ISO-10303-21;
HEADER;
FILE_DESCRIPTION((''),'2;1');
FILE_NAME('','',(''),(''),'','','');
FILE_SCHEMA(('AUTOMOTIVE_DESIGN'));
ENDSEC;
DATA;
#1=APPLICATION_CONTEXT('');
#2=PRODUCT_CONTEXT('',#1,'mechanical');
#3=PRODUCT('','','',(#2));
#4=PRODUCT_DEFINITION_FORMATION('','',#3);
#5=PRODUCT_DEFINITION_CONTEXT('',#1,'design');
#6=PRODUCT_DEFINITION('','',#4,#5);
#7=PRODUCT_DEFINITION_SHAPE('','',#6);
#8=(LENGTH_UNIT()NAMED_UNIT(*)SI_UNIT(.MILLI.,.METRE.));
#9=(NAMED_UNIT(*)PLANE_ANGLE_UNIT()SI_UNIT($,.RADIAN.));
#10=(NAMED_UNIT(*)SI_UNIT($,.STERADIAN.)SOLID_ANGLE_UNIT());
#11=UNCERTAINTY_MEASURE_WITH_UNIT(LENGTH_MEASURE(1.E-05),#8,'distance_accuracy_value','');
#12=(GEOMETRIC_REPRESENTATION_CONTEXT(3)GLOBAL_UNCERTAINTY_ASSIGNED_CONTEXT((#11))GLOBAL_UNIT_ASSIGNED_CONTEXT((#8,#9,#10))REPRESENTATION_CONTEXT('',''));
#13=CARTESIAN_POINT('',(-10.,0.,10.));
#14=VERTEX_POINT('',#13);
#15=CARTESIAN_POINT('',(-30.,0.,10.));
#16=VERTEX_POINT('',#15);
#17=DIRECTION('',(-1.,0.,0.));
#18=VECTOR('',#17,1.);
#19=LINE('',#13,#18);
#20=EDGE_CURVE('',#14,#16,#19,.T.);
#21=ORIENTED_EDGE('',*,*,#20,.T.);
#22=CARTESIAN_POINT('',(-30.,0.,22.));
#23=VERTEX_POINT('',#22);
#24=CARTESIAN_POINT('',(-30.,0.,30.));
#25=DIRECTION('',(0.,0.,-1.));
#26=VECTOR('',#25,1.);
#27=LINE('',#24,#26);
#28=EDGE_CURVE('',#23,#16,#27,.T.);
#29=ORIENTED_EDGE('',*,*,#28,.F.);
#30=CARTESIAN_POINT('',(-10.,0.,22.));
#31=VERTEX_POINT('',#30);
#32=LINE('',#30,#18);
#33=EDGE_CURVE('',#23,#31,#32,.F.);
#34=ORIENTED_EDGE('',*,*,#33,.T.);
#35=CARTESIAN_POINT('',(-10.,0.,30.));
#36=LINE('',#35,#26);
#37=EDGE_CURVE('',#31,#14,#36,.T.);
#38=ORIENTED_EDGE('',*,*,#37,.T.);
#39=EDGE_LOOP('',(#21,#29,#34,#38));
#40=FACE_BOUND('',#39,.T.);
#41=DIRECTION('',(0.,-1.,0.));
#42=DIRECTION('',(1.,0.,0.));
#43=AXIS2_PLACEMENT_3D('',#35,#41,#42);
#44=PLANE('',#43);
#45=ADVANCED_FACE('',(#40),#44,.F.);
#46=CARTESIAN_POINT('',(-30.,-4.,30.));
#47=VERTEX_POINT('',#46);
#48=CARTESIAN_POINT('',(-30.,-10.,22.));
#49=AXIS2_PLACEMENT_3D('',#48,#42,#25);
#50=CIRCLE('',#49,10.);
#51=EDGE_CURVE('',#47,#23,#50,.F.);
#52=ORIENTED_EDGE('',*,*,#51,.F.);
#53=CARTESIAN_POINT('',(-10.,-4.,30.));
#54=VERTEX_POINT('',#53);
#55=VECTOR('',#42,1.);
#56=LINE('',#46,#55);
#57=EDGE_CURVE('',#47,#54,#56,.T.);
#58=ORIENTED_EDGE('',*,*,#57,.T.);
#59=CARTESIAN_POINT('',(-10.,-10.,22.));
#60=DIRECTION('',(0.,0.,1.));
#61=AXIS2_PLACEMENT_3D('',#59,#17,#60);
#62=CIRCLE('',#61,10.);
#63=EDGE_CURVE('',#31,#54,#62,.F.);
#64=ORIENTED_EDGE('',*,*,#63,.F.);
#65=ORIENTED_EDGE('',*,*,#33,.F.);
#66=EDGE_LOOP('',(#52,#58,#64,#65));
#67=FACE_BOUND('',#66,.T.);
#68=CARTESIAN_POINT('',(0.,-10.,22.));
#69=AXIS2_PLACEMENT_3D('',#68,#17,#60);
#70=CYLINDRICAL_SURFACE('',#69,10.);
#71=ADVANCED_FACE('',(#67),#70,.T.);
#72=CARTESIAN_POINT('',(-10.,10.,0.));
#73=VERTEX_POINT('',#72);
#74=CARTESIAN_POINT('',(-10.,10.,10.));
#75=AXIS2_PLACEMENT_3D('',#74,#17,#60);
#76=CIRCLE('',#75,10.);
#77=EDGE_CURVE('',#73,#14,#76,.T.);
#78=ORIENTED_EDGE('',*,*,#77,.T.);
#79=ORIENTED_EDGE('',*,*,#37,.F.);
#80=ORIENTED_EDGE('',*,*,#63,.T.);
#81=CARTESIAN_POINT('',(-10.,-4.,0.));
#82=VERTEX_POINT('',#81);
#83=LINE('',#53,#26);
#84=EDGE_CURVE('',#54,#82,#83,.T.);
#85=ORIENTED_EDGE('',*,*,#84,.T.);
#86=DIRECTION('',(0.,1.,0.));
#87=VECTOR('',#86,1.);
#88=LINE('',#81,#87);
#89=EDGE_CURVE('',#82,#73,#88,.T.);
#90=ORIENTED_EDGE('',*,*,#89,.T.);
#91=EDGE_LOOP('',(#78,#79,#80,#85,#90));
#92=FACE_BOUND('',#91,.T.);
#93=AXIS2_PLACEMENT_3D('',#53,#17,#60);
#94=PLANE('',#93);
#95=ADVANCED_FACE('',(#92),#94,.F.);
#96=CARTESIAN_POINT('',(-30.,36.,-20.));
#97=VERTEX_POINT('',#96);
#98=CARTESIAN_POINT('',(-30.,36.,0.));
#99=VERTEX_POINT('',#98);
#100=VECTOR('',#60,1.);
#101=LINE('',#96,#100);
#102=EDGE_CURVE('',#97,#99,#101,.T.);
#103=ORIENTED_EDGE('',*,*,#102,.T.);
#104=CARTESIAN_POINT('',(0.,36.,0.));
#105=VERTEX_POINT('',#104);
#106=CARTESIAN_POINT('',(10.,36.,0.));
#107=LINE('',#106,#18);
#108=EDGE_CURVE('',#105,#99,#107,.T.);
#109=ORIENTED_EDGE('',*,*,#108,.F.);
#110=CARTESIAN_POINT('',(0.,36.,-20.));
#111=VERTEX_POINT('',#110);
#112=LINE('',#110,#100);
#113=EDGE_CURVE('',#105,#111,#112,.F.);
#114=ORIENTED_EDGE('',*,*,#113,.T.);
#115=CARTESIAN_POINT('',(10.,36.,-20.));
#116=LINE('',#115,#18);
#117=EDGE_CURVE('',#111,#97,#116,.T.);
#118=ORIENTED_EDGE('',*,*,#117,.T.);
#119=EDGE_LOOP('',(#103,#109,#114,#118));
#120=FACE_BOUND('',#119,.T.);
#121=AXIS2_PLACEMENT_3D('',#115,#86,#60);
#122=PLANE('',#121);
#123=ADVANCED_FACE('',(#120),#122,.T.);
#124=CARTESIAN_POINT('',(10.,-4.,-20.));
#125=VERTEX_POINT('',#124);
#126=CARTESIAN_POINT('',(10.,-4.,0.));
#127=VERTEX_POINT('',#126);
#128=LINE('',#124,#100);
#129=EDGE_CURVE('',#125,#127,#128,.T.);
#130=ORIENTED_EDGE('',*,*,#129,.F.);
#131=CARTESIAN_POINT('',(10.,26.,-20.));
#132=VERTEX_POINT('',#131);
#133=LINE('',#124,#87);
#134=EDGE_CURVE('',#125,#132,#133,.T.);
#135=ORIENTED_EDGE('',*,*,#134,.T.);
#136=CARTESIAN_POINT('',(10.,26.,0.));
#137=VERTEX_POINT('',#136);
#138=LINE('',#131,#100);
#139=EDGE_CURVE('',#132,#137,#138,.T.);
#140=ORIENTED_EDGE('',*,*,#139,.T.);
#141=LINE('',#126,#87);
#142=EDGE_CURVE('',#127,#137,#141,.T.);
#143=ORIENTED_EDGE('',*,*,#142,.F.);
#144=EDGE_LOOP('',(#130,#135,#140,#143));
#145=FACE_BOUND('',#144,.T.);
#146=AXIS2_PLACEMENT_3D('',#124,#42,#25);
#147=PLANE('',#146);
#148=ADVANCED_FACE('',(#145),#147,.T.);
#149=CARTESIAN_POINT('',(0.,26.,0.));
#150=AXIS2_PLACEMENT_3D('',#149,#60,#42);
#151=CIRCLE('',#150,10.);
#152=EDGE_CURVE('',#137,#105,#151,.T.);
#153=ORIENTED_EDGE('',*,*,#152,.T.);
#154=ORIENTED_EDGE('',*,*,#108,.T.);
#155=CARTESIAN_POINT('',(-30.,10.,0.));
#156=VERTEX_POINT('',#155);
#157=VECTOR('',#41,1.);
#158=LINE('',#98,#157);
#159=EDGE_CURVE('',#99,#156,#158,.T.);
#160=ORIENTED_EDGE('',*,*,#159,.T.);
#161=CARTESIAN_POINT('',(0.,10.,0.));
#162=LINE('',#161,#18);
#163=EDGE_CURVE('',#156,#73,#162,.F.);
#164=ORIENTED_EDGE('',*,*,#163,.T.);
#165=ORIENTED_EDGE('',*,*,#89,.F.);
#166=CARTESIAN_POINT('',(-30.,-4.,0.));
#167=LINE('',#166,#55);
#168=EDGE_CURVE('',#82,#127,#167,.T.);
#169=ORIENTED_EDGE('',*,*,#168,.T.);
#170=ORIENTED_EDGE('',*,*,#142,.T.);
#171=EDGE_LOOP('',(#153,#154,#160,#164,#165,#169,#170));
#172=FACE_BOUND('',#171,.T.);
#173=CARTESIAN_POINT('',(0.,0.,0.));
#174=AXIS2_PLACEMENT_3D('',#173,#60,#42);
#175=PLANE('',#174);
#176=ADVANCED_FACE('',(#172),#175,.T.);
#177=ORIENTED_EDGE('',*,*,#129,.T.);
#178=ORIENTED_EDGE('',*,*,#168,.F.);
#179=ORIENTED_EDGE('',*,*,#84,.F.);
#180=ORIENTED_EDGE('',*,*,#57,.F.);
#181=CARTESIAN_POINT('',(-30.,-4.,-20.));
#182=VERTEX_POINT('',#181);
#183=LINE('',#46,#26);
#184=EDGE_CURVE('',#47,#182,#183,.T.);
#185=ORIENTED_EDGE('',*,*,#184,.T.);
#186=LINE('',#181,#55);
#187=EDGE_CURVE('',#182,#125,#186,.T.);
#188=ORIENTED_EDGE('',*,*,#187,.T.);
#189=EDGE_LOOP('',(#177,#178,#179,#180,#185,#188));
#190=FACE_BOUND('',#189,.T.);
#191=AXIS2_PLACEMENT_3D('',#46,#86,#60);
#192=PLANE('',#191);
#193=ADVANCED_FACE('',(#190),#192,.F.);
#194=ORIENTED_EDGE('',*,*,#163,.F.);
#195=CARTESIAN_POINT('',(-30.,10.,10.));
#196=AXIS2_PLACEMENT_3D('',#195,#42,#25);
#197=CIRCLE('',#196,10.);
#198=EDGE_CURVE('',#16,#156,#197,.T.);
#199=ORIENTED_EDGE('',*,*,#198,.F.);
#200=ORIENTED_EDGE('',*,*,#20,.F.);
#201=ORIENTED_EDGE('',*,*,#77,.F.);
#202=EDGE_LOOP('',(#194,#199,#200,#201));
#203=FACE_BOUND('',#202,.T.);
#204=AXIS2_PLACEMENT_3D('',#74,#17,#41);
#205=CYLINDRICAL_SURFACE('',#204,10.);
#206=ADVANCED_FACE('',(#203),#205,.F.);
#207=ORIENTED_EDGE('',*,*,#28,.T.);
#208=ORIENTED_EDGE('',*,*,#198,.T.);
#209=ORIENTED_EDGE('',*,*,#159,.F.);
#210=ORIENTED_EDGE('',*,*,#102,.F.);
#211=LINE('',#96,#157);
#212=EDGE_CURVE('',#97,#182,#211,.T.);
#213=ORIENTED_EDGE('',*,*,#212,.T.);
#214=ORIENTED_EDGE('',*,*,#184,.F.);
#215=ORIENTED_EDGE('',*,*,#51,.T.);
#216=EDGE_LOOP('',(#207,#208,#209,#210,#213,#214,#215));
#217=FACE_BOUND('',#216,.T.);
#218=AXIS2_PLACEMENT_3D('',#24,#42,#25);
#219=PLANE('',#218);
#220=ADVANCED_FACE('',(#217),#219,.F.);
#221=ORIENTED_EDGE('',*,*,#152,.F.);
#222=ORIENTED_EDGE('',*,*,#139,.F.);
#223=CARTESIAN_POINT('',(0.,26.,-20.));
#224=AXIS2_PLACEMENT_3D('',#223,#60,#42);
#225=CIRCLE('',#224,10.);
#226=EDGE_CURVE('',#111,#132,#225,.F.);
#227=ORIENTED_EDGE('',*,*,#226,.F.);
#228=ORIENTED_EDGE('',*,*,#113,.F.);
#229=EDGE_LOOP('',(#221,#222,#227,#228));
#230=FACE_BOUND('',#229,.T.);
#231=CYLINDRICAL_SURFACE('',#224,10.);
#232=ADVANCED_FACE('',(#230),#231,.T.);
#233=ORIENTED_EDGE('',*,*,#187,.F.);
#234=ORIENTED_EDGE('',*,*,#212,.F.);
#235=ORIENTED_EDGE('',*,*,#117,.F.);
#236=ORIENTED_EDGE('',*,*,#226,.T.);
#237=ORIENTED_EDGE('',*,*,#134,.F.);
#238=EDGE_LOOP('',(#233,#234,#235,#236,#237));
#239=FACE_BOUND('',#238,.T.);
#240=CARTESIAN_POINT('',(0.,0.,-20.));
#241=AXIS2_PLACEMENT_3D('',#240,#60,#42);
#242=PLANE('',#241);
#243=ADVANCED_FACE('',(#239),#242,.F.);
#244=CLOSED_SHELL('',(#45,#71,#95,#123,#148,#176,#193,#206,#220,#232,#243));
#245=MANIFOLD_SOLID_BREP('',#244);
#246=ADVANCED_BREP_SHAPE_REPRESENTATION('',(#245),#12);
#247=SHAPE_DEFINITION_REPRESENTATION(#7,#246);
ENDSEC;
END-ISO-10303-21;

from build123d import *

# Parameters (mm, degrees)
SKETCH1_W           = 20
SKETCH1_H           = 4
BOSS_EXTRUDE1_DEPTH = 30
SKETCH2_W           = 40
SKETCH2_H           = 40
BOSS_EXTRUDE2_DEPTH = 20
FILLET1_R           = 10


with BuildPart() as part:
    # Sketch1 → Boss-Extrude1 (new body)
    with BuildSketch(Plane.XY):
        with Locations((-20, -2)):
            Rectangle(SKETCH1_W, SKETCH1_H)
    extrude(amount=BOSS_EXTRUDE1_DEPTH)

    # Sketch2 → Boss-Extrude2 (add)
    with BuildSketch(Plane.XY):
        with Locations((-10, 16)):
            Rectangle(SKETCH2_W, SKETCH2_H)
    extrude(amount=-BOSS_EXTRUDE2_DEPTH)

    # Fillet1
    # the kernel refuses this fillet: 10 mm, written as the material it adds along each edge
    with BuildSketch(Plane(origin=(-10, 0, 0), x_dir=(0, 1, 0), z_dir=(-1, 0, 0))) as fillet1_piece_1:
        with BuildLine():
            CenterArc((FILLET1_R, -FILLET1_R), FILLET1_R, 90, 90)
            Line((0, -FILLET1_R), (0, 0))
            Line((0, 0), (FILLET1_R, 0))
        make_face()
    extrude(amount=20)
    # the kernel refuses this fillet: 10 mm, written as the material it takes off along each edge
    with BuildSketch(Plane(origin=(10, 36, 25), x_dir=(-1, 0, 0), z_dir=(0, 0, -1))) as fillet1_2_piece_1:
        with BuildLine():
            CenterArc((FILLET1_R, -FILLET1_R), FILLET1_R, 90, 90)
            Line((0, -FILLET1_R), (0, 0))
            Line((0, 0), (FILLET1_R, 0))
        make_face()
    extrude(amount=70, mode=Mode.SUBTRACT)
    with BuildSketch(Plane(origin=(10, 0, 30), x_dir=(0, 0, -1), z_dir=(-1, 0, 0))) as fillet1_2_piece_2:
        with BuildLine():
            CenterArc((8, 10), FILLET1_R, 216.869897646, 53.130102354)
            Line((0, 4), (0, 0))
            Line((0, 0), (8, 0))
        make_face()
    extrude(amount=60, mode=Mode.SUBTRACT)


solid = part.part
